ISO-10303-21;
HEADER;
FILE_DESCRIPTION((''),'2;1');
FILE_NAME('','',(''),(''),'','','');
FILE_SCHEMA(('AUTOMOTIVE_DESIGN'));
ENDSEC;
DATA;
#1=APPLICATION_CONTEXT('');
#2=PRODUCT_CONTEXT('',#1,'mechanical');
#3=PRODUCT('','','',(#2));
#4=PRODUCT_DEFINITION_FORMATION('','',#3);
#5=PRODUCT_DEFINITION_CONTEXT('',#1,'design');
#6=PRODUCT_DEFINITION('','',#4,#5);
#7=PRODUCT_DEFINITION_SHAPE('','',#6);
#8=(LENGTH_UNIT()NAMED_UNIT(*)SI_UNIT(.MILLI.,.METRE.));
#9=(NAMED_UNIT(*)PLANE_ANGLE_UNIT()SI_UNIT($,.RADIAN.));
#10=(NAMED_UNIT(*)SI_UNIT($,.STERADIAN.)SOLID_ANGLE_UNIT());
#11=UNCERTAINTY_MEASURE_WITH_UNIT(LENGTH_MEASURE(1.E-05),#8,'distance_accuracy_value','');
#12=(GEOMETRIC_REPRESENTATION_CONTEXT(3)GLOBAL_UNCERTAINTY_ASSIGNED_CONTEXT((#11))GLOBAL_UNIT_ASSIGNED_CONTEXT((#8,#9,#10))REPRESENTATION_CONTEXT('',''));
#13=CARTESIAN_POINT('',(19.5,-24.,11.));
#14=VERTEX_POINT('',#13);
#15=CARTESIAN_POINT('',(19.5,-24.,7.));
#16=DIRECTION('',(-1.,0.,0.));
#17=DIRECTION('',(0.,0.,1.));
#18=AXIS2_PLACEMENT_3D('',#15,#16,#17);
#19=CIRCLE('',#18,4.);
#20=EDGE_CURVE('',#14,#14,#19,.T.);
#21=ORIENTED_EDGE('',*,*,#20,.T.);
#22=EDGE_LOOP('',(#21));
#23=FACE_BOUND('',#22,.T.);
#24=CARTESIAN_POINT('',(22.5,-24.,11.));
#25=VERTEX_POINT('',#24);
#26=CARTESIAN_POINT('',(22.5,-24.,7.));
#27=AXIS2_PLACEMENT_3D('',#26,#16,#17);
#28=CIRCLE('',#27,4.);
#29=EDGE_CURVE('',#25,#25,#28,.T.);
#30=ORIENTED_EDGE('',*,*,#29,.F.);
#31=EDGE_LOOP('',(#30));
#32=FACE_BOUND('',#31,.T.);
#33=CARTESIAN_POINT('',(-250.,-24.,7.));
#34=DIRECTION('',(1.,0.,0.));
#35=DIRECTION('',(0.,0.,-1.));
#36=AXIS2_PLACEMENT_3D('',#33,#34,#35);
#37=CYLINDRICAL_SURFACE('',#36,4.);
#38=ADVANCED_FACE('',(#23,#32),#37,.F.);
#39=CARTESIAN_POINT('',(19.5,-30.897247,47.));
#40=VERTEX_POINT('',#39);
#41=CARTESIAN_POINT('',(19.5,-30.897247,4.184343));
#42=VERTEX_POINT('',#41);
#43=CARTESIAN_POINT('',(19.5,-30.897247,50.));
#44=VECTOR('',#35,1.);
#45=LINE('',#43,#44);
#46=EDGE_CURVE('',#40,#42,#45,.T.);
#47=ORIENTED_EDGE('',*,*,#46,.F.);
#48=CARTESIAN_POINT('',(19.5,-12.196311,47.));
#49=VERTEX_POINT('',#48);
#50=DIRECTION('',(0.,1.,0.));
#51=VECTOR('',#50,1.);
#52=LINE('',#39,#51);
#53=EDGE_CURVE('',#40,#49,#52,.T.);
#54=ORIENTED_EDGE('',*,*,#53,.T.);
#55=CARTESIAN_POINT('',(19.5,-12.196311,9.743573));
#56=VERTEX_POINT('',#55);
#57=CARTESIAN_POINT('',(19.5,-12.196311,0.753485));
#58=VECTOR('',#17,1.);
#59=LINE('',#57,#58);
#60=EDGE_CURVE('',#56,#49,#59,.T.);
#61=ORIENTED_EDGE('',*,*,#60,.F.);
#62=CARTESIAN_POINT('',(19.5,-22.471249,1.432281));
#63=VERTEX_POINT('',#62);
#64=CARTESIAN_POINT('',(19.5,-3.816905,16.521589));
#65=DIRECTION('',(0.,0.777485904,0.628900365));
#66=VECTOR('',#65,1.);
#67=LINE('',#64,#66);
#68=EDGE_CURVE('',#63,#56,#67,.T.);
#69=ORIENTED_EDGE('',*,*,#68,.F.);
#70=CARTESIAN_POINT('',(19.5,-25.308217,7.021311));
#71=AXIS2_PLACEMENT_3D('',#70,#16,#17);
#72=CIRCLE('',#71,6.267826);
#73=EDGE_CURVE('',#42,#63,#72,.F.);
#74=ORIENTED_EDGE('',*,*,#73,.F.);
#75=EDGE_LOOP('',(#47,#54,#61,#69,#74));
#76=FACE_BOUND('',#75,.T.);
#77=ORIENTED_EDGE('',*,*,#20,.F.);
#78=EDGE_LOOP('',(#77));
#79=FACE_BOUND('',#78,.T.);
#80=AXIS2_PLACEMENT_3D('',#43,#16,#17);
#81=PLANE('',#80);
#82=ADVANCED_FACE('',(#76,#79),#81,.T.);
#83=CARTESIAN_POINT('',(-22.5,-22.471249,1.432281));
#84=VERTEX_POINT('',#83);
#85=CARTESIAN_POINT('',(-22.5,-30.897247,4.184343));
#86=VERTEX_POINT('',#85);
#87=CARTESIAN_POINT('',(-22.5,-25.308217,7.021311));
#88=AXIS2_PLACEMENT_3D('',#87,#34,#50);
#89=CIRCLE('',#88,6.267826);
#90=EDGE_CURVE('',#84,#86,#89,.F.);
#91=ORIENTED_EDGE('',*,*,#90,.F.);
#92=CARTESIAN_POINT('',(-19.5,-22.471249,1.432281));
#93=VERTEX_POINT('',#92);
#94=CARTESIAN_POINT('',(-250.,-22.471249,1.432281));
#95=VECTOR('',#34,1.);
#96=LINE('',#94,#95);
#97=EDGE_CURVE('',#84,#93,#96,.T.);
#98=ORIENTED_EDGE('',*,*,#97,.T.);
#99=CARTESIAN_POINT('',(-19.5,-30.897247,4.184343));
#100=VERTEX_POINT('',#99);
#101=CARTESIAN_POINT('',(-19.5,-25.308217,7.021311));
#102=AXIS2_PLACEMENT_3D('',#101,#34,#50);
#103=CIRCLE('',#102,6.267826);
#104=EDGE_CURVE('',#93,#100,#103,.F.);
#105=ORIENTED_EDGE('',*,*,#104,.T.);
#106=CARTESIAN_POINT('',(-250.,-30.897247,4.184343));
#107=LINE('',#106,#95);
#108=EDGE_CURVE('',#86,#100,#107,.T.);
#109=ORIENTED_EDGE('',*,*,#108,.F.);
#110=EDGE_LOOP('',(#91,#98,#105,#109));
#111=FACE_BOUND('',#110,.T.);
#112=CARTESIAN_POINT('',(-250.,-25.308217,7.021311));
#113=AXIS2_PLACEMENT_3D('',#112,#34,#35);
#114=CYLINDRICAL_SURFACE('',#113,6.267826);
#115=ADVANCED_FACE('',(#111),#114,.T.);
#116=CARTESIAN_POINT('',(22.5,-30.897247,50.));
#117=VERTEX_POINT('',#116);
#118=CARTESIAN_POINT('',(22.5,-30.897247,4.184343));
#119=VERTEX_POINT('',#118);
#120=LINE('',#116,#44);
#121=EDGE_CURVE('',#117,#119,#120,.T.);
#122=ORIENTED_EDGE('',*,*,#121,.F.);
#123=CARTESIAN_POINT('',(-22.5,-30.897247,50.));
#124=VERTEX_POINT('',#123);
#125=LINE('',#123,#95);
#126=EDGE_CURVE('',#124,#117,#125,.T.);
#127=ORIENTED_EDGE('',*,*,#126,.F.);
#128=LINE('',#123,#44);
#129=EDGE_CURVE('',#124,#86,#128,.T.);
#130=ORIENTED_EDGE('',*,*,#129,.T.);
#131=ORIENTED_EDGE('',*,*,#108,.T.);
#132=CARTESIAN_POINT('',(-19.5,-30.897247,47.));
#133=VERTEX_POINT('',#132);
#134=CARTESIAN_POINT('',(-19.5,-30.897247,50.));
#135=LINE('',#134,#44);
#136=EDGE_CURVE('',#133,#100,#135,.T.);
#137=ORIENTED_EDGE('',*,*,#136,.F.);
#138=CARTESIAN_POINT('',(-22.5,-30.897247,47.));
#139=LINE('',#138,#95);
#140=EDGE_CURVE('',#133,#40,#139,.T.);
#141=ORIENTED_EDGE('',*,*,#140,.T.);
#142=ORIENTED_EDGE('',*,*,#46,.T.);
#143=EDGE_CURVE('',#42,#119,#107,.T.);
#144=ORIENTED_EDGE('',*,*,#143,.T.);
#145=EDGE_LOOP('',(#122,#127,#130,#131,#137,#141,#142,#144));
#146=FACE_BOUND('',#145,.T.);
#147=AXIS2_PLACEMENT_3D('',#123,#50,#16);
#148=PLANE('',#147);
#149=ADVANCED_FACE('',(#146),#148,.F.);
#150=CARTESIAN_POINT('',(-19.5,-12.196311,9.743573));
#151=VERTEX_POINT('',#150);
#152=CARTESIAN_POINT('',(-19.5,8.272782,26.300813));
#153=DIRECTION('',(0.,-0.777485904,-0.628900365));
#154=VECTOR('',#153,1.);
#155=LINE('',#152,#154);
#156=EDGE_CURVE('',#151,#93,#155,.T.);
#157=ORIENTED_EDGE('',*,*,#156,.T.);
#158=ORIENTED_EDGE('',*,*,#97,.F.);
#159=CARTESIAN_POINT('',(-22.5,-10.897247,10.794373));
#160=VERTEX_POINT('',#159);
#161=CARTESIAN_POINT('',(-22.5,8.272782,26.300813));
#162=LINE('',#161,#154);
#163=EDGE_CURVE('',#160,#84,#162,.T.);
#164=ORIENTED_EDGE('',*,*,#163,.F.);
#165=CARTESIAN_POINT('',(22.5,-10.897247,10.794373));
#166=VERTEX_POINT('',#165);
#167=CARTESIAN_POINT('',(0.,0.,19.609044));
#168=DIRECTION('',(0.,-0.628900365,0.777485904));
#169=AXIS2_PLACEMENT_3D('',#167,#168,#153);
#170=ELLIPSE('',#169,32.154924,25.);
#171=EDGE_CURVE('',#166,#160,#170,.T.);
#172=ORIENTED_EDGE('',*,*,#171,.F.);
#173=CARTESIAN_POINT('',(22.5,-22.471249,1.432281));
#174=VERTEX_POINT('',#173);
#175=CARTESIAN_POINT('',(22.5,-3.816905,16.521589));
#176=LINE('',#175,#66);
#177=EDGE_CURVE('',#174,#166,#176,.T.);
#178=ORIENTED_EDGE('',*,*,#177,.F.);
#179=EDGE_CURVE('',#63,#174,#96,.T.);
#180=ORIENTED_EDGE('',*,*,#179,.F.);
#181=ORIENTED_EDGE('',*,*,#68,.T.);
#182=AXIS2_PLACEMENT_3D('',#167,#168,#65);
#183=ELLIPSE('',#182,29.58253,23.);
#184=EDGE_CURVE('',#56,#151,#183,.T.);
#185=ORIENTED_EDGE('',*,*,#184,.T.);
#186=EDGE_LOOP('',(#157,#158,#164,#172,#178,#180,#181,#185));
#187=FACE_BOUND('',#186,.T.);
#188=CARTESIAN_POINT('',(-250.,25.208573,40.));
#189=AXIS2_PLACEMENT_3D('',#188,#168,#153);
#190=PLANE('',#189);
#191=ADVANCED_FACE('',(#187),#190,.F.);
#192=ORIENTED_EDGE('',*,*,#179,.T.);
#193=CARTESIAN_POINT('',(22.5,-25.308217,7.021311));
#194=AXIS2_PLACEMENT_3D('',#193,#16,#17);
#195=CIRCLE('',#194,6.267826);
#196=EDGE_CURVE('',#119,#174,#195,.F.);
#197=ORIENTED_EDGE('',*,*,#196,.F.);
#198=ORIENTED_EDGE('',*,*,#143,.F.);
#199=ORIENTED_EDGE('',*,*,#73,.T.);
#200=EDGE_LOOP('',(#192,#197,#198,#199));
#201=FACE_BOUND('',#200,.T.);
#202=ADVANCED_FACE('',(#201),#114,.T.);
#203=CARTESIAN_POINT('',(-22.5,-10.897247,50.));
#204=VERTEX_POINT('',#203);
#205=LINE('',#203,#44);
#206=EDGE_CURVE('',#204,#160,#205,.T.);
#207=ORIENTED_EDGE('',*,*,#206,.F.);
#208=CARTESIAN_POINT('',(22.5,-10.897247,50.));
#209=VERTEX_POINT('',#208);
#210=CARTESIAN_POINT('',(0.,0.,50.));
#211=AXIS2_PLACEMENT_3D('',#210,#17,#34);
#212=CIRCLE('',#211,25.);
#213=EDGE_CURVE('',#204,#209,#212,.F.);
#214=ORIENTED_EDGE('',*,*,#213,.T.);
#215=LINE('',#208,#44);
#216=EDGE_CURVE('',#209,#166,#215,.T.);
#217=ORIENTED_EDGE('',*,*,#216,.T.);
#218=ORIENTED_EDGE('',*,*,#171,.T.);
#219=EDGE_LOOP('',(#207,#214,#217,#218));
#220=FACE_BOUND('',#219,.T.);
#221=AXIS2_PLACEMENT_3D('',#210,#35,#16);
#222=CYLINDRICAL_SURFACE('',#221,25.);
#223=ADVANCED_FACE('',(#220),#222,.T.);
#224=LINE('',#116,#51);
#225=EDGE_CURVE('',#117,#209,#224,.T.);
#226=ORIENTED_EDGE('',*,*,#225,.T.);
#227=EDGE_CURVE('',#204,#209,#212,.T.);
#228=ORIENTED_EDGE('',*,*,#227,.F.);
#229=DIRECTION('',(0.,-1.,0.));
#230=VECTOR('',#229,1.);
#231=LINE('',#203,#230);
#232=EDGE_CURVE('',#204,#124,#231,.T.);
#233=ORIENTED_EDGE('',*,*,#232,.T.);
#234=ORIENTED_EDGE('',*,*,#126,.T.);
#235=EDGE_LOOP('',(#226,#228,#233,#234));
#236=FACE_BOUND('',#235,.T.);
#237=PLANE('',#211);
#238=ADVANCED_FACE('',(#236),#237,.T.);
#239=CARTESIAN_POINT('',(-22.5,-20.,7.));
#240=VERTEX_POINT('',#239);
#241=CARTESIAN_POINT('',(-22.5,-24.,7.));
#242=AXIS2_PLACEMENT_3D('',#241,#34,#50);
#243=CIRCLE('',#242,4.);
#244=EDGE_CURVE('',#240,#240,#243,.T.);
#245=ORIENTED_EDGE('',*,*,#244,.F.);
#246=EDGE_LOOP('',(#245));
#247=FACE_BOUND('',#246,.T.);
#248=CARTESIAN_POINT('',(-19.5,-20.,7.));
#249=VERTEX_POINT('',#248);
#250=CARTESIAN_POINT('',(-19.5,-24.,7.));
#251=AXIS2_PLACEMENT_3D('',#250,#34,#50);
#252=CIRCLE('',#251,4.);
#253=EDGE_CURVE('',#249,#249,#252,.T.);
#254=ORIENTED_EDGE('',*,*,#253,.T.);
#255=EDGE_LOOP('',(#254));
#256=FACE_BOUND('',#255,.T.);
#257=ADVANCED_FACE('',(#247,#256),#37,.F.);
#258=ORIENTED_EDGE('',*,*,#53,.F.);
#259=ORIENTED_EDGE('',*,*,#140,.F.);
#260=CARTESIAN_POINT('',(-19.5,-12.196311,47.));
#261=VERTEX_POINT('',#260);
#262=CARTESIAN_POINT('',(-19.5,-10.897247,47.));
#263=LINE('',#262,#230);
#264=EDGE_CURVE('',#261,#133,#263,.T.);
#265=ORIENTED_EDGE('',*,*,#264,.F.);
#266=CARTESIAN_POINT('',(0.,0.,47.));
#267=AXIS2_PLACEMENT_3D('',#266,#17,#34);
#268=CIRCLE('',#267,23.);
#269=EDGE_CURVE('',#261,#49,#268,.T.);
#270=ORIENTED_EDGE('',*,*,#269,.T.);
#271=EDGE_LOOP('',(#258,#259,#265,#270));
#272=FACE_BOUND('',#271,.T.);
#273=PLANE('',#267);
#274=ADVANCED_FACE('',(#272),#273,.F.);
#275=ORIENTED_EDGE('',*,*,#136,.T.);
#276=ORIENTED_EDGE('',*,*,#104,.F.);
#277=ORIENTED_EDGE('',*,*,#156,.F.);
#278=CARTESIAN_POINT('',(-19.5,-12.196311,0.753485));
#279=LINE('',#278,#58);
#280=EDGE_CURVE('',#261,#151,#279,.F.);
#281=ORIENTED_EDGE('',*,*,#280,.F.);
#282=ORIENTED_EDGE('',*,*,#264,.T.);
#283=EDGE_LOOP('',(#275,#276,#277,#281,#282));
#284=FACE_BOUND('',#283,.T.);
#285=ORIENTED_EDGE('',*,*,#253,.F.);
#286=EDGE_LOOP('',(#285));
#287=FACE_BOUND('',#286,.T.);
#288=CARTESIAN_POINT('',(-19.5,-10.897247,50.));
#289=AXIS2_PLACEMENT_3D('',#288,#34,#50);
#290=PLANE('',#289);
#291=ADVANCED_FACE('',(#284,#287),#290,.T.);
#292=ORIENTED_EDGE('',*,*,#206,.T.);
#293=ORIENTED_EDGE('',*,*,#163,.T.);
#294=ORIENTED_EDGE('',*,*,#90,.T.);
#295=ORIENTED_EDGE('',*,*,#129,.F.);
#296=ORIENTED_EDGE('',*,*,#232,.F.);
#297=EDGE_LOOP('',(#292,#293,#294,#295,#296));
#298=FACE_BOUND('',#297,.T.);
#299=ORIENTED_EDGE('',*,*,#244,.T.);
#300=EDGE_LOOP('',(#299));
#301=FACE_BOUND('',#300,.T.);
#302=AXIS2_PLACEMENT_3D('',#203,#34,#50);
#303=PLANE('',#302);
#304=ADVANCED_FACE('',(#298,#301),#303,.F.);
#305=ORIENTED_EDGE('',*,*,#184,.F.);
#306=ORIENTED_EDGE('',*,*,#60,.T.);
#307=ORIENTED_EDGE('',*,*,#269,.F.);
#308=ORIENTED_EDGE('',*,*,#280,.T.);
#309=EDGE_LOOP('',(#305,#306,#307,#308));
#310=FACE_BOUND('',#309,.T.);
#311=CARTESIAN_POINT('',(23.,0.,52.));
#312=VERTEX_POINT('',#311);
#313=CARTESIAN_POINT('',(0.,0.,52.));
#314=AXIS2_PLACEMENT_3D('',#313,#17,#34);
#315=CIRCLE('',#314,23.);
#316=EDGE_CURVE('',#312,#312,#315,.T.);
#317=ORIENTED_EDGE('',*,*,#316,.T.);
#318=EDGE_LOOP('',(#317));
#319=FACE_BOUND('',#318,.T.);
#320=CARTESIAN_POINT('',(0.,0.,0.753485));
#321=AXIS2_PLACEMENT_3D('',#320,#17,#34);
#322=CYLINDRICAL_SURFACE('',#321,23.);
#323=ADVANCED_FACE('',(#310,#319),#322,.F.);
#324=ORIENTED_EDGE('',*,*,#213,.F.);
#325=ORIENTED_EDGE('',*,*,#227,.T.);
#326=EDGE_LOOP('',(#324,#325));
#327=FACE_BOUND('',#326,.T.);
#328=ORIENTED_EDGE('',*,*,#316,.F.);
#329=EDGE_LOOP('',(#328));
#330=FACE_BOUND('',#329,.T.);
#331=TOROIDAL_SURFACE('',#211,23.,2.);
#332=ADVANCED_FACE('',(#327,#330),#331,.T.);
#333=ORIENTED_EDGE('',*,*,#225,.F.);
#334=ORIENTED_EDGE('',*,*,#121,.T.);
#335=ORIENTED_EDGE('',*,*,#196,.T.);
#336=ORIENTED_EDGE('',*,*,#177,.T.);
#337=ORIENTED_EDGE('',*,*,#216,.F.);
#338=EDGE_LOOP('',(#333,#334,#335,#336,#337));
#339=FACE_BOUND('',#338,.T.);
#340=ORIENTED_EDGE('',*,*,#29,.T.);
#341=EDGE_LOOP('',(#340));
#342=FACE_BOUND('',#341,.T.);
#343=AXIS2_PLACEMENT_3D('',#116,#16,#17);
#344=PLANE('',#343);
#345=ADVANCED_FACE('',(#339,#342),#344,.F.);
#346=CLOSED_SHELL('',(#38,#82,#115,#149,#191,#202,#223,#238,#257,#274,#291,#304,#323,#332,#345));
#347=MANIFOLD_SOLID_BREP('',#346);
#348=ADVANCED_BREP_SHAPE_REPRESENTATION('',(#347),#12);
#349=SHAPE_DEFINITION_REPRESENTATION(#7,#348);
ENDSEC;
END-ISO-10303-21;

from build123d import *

# Parameters (mm, degrees)
EXTRUDE_1_DEPTH      = 50
SHELL_2_T            = -3
SKETCH_13_R          = 4
CUT_EXTRUDE_1_DEPTH  = 250
SKETCH_18_R          = 25
EXTRUDE_4_DEPTH      = 2
SKETCH_19_R          = 9.153493009
CUT_EXTRUDE_10_DEPTH = 65.852487738
SKETCH_16_R          = 25
EXTRUDE_3_DEPTH      = 2
SKETCH_17_R          = 23
CUT_EXTRUDE_9_DEPTH  = 65.852487738


with BuildPart() as part:
    # 草图1 → 凸台-拉伸1 (new body)
    with BuildSketch(Plane.XY):
        with BuildLine():
            Line((-22.5, -10.897247359), (-22.5, -30.897247359))
            Line((-22.5, -30.897247359), (22.5, -30.897247359))
            Line((22.5, -30.897247359), (22.5, -10.897247359))
            ThreePointArc((22.5, -10.897247359), (0, 25), (-22.5, -10.897247359))
        make_face()
    extrude(amount=EXTRUDE_1_DEPTH)

    # 抽壳2
    shell_2_openings = [part.faces().sort_by_distance(p)[0] for p in [
        (0, -4.655282496, 0),
        (0, -30.897247359, 25),
    ]]
    offset(amount=SHELL_2_T, openings=shell_2_openings, kind=Kind.INTERSECTION)

    # 草图13 → 切除-拉伸1 (cut, symmetric)
    with BuildSketch(Plane(origin=(0, 0, 0), x_dir=(0, 0, -1), z_dir=(1, 0, 0))):
        with Locations(Location((-7, -24, 0), (0, 0, 180))):
            Circle(SKETCH_13_R)
        with BuildLine():
            Line((-40, 25.208572912), (-1.432281326, -22.471249301))
            ThreePointArc((-1.432281326, -22.471249301), (-1.063231061, -27.254219062), (-4.184343468, -30.897247359))
            Line((-4.184343468, -30.897247359), (0, -30.897247359))
            Line((0, -30.897247359), (0, 25.208572912))
            Line((0, 25.208572912), (-40, 25.208572912))
        make_face()
    extrude(amount=CUT_EXTRUDE_1_DEPTH, both=True, mode=Mode.SUBTRACT)

    # 草图18 → 凸台-拉伸4 (add)
    with BuildSketch(Plane.XY.offset(50)):
        with Locations(Location((0, 0, 0), (0, 0, 205.841932763))):
            Circle(SKETCH_18_R)
    extrude(amount=EXTRUDE_4_DEPTH)

    # 圆角3: read off the stored shape, not the designer's step
    # 圆角3 outline → 圆角3 (revolve, cut)
    with BuildSketch(Plane.XZ):
        with BuildLine():
            ThreePointArc((23, 52), (24.414213562, 51.414213562), (25, 50))
            Line((25, 50), (25, 52))
            Line((25, 52), (23, 52))
        make_face()
    revolve(axis=Axis((0, 0, 0), (0, 0, 1)), mode=Mode.SUBTRACT)

    # 草图19 → 切除-拉伸10 (cut, through all)
    with BuildSketch(Plane.XY.offset(52)):
        Circle(SKETCH_19_R)
    extrude(amount=-CUT_EXTRUDE_10_DEPTH, mode=Mode.SUBTRACT)

    # 草图16 → 凸台-拉伸3 (add)
    with BuildSketch(Plane.XY.offset(50)):
        with Locations(Location((0, 0, 0), (0, 0, 205.841932763))):
            Circle(SKETCH_16_R)
    extrude(amount=EXTRUDE_3_DEPTH)

    # 圆角2: read off the stored shape, not the designer's step
    # 圆角2 outline → 圆角2 (revolve, cut)
    with BuildSketch(Plane.XZ):
        with BuildLine():
            ThreePointArc((23, 52), (24.414213562, 51.414213562), (25, 50))
            Line((25, 50), (25, 52))
            Line((25, 52), (23, 52))
        make_face()
    revolve(axis=Axis((0, 0, 0), (0, 0, 1)), mode=Mode.SUBTRACT)

    # 草图17 → 切除-拉伸9 (cut, through all)
    with BuildSketch(Plane.XY.offset(52)):
        Circle(SKETCH_17_R)
    extrude(amount=-CUT_EXTRUDE_9_DEPTH, mode=Mode.SUBTRACT)


solid = part.part
